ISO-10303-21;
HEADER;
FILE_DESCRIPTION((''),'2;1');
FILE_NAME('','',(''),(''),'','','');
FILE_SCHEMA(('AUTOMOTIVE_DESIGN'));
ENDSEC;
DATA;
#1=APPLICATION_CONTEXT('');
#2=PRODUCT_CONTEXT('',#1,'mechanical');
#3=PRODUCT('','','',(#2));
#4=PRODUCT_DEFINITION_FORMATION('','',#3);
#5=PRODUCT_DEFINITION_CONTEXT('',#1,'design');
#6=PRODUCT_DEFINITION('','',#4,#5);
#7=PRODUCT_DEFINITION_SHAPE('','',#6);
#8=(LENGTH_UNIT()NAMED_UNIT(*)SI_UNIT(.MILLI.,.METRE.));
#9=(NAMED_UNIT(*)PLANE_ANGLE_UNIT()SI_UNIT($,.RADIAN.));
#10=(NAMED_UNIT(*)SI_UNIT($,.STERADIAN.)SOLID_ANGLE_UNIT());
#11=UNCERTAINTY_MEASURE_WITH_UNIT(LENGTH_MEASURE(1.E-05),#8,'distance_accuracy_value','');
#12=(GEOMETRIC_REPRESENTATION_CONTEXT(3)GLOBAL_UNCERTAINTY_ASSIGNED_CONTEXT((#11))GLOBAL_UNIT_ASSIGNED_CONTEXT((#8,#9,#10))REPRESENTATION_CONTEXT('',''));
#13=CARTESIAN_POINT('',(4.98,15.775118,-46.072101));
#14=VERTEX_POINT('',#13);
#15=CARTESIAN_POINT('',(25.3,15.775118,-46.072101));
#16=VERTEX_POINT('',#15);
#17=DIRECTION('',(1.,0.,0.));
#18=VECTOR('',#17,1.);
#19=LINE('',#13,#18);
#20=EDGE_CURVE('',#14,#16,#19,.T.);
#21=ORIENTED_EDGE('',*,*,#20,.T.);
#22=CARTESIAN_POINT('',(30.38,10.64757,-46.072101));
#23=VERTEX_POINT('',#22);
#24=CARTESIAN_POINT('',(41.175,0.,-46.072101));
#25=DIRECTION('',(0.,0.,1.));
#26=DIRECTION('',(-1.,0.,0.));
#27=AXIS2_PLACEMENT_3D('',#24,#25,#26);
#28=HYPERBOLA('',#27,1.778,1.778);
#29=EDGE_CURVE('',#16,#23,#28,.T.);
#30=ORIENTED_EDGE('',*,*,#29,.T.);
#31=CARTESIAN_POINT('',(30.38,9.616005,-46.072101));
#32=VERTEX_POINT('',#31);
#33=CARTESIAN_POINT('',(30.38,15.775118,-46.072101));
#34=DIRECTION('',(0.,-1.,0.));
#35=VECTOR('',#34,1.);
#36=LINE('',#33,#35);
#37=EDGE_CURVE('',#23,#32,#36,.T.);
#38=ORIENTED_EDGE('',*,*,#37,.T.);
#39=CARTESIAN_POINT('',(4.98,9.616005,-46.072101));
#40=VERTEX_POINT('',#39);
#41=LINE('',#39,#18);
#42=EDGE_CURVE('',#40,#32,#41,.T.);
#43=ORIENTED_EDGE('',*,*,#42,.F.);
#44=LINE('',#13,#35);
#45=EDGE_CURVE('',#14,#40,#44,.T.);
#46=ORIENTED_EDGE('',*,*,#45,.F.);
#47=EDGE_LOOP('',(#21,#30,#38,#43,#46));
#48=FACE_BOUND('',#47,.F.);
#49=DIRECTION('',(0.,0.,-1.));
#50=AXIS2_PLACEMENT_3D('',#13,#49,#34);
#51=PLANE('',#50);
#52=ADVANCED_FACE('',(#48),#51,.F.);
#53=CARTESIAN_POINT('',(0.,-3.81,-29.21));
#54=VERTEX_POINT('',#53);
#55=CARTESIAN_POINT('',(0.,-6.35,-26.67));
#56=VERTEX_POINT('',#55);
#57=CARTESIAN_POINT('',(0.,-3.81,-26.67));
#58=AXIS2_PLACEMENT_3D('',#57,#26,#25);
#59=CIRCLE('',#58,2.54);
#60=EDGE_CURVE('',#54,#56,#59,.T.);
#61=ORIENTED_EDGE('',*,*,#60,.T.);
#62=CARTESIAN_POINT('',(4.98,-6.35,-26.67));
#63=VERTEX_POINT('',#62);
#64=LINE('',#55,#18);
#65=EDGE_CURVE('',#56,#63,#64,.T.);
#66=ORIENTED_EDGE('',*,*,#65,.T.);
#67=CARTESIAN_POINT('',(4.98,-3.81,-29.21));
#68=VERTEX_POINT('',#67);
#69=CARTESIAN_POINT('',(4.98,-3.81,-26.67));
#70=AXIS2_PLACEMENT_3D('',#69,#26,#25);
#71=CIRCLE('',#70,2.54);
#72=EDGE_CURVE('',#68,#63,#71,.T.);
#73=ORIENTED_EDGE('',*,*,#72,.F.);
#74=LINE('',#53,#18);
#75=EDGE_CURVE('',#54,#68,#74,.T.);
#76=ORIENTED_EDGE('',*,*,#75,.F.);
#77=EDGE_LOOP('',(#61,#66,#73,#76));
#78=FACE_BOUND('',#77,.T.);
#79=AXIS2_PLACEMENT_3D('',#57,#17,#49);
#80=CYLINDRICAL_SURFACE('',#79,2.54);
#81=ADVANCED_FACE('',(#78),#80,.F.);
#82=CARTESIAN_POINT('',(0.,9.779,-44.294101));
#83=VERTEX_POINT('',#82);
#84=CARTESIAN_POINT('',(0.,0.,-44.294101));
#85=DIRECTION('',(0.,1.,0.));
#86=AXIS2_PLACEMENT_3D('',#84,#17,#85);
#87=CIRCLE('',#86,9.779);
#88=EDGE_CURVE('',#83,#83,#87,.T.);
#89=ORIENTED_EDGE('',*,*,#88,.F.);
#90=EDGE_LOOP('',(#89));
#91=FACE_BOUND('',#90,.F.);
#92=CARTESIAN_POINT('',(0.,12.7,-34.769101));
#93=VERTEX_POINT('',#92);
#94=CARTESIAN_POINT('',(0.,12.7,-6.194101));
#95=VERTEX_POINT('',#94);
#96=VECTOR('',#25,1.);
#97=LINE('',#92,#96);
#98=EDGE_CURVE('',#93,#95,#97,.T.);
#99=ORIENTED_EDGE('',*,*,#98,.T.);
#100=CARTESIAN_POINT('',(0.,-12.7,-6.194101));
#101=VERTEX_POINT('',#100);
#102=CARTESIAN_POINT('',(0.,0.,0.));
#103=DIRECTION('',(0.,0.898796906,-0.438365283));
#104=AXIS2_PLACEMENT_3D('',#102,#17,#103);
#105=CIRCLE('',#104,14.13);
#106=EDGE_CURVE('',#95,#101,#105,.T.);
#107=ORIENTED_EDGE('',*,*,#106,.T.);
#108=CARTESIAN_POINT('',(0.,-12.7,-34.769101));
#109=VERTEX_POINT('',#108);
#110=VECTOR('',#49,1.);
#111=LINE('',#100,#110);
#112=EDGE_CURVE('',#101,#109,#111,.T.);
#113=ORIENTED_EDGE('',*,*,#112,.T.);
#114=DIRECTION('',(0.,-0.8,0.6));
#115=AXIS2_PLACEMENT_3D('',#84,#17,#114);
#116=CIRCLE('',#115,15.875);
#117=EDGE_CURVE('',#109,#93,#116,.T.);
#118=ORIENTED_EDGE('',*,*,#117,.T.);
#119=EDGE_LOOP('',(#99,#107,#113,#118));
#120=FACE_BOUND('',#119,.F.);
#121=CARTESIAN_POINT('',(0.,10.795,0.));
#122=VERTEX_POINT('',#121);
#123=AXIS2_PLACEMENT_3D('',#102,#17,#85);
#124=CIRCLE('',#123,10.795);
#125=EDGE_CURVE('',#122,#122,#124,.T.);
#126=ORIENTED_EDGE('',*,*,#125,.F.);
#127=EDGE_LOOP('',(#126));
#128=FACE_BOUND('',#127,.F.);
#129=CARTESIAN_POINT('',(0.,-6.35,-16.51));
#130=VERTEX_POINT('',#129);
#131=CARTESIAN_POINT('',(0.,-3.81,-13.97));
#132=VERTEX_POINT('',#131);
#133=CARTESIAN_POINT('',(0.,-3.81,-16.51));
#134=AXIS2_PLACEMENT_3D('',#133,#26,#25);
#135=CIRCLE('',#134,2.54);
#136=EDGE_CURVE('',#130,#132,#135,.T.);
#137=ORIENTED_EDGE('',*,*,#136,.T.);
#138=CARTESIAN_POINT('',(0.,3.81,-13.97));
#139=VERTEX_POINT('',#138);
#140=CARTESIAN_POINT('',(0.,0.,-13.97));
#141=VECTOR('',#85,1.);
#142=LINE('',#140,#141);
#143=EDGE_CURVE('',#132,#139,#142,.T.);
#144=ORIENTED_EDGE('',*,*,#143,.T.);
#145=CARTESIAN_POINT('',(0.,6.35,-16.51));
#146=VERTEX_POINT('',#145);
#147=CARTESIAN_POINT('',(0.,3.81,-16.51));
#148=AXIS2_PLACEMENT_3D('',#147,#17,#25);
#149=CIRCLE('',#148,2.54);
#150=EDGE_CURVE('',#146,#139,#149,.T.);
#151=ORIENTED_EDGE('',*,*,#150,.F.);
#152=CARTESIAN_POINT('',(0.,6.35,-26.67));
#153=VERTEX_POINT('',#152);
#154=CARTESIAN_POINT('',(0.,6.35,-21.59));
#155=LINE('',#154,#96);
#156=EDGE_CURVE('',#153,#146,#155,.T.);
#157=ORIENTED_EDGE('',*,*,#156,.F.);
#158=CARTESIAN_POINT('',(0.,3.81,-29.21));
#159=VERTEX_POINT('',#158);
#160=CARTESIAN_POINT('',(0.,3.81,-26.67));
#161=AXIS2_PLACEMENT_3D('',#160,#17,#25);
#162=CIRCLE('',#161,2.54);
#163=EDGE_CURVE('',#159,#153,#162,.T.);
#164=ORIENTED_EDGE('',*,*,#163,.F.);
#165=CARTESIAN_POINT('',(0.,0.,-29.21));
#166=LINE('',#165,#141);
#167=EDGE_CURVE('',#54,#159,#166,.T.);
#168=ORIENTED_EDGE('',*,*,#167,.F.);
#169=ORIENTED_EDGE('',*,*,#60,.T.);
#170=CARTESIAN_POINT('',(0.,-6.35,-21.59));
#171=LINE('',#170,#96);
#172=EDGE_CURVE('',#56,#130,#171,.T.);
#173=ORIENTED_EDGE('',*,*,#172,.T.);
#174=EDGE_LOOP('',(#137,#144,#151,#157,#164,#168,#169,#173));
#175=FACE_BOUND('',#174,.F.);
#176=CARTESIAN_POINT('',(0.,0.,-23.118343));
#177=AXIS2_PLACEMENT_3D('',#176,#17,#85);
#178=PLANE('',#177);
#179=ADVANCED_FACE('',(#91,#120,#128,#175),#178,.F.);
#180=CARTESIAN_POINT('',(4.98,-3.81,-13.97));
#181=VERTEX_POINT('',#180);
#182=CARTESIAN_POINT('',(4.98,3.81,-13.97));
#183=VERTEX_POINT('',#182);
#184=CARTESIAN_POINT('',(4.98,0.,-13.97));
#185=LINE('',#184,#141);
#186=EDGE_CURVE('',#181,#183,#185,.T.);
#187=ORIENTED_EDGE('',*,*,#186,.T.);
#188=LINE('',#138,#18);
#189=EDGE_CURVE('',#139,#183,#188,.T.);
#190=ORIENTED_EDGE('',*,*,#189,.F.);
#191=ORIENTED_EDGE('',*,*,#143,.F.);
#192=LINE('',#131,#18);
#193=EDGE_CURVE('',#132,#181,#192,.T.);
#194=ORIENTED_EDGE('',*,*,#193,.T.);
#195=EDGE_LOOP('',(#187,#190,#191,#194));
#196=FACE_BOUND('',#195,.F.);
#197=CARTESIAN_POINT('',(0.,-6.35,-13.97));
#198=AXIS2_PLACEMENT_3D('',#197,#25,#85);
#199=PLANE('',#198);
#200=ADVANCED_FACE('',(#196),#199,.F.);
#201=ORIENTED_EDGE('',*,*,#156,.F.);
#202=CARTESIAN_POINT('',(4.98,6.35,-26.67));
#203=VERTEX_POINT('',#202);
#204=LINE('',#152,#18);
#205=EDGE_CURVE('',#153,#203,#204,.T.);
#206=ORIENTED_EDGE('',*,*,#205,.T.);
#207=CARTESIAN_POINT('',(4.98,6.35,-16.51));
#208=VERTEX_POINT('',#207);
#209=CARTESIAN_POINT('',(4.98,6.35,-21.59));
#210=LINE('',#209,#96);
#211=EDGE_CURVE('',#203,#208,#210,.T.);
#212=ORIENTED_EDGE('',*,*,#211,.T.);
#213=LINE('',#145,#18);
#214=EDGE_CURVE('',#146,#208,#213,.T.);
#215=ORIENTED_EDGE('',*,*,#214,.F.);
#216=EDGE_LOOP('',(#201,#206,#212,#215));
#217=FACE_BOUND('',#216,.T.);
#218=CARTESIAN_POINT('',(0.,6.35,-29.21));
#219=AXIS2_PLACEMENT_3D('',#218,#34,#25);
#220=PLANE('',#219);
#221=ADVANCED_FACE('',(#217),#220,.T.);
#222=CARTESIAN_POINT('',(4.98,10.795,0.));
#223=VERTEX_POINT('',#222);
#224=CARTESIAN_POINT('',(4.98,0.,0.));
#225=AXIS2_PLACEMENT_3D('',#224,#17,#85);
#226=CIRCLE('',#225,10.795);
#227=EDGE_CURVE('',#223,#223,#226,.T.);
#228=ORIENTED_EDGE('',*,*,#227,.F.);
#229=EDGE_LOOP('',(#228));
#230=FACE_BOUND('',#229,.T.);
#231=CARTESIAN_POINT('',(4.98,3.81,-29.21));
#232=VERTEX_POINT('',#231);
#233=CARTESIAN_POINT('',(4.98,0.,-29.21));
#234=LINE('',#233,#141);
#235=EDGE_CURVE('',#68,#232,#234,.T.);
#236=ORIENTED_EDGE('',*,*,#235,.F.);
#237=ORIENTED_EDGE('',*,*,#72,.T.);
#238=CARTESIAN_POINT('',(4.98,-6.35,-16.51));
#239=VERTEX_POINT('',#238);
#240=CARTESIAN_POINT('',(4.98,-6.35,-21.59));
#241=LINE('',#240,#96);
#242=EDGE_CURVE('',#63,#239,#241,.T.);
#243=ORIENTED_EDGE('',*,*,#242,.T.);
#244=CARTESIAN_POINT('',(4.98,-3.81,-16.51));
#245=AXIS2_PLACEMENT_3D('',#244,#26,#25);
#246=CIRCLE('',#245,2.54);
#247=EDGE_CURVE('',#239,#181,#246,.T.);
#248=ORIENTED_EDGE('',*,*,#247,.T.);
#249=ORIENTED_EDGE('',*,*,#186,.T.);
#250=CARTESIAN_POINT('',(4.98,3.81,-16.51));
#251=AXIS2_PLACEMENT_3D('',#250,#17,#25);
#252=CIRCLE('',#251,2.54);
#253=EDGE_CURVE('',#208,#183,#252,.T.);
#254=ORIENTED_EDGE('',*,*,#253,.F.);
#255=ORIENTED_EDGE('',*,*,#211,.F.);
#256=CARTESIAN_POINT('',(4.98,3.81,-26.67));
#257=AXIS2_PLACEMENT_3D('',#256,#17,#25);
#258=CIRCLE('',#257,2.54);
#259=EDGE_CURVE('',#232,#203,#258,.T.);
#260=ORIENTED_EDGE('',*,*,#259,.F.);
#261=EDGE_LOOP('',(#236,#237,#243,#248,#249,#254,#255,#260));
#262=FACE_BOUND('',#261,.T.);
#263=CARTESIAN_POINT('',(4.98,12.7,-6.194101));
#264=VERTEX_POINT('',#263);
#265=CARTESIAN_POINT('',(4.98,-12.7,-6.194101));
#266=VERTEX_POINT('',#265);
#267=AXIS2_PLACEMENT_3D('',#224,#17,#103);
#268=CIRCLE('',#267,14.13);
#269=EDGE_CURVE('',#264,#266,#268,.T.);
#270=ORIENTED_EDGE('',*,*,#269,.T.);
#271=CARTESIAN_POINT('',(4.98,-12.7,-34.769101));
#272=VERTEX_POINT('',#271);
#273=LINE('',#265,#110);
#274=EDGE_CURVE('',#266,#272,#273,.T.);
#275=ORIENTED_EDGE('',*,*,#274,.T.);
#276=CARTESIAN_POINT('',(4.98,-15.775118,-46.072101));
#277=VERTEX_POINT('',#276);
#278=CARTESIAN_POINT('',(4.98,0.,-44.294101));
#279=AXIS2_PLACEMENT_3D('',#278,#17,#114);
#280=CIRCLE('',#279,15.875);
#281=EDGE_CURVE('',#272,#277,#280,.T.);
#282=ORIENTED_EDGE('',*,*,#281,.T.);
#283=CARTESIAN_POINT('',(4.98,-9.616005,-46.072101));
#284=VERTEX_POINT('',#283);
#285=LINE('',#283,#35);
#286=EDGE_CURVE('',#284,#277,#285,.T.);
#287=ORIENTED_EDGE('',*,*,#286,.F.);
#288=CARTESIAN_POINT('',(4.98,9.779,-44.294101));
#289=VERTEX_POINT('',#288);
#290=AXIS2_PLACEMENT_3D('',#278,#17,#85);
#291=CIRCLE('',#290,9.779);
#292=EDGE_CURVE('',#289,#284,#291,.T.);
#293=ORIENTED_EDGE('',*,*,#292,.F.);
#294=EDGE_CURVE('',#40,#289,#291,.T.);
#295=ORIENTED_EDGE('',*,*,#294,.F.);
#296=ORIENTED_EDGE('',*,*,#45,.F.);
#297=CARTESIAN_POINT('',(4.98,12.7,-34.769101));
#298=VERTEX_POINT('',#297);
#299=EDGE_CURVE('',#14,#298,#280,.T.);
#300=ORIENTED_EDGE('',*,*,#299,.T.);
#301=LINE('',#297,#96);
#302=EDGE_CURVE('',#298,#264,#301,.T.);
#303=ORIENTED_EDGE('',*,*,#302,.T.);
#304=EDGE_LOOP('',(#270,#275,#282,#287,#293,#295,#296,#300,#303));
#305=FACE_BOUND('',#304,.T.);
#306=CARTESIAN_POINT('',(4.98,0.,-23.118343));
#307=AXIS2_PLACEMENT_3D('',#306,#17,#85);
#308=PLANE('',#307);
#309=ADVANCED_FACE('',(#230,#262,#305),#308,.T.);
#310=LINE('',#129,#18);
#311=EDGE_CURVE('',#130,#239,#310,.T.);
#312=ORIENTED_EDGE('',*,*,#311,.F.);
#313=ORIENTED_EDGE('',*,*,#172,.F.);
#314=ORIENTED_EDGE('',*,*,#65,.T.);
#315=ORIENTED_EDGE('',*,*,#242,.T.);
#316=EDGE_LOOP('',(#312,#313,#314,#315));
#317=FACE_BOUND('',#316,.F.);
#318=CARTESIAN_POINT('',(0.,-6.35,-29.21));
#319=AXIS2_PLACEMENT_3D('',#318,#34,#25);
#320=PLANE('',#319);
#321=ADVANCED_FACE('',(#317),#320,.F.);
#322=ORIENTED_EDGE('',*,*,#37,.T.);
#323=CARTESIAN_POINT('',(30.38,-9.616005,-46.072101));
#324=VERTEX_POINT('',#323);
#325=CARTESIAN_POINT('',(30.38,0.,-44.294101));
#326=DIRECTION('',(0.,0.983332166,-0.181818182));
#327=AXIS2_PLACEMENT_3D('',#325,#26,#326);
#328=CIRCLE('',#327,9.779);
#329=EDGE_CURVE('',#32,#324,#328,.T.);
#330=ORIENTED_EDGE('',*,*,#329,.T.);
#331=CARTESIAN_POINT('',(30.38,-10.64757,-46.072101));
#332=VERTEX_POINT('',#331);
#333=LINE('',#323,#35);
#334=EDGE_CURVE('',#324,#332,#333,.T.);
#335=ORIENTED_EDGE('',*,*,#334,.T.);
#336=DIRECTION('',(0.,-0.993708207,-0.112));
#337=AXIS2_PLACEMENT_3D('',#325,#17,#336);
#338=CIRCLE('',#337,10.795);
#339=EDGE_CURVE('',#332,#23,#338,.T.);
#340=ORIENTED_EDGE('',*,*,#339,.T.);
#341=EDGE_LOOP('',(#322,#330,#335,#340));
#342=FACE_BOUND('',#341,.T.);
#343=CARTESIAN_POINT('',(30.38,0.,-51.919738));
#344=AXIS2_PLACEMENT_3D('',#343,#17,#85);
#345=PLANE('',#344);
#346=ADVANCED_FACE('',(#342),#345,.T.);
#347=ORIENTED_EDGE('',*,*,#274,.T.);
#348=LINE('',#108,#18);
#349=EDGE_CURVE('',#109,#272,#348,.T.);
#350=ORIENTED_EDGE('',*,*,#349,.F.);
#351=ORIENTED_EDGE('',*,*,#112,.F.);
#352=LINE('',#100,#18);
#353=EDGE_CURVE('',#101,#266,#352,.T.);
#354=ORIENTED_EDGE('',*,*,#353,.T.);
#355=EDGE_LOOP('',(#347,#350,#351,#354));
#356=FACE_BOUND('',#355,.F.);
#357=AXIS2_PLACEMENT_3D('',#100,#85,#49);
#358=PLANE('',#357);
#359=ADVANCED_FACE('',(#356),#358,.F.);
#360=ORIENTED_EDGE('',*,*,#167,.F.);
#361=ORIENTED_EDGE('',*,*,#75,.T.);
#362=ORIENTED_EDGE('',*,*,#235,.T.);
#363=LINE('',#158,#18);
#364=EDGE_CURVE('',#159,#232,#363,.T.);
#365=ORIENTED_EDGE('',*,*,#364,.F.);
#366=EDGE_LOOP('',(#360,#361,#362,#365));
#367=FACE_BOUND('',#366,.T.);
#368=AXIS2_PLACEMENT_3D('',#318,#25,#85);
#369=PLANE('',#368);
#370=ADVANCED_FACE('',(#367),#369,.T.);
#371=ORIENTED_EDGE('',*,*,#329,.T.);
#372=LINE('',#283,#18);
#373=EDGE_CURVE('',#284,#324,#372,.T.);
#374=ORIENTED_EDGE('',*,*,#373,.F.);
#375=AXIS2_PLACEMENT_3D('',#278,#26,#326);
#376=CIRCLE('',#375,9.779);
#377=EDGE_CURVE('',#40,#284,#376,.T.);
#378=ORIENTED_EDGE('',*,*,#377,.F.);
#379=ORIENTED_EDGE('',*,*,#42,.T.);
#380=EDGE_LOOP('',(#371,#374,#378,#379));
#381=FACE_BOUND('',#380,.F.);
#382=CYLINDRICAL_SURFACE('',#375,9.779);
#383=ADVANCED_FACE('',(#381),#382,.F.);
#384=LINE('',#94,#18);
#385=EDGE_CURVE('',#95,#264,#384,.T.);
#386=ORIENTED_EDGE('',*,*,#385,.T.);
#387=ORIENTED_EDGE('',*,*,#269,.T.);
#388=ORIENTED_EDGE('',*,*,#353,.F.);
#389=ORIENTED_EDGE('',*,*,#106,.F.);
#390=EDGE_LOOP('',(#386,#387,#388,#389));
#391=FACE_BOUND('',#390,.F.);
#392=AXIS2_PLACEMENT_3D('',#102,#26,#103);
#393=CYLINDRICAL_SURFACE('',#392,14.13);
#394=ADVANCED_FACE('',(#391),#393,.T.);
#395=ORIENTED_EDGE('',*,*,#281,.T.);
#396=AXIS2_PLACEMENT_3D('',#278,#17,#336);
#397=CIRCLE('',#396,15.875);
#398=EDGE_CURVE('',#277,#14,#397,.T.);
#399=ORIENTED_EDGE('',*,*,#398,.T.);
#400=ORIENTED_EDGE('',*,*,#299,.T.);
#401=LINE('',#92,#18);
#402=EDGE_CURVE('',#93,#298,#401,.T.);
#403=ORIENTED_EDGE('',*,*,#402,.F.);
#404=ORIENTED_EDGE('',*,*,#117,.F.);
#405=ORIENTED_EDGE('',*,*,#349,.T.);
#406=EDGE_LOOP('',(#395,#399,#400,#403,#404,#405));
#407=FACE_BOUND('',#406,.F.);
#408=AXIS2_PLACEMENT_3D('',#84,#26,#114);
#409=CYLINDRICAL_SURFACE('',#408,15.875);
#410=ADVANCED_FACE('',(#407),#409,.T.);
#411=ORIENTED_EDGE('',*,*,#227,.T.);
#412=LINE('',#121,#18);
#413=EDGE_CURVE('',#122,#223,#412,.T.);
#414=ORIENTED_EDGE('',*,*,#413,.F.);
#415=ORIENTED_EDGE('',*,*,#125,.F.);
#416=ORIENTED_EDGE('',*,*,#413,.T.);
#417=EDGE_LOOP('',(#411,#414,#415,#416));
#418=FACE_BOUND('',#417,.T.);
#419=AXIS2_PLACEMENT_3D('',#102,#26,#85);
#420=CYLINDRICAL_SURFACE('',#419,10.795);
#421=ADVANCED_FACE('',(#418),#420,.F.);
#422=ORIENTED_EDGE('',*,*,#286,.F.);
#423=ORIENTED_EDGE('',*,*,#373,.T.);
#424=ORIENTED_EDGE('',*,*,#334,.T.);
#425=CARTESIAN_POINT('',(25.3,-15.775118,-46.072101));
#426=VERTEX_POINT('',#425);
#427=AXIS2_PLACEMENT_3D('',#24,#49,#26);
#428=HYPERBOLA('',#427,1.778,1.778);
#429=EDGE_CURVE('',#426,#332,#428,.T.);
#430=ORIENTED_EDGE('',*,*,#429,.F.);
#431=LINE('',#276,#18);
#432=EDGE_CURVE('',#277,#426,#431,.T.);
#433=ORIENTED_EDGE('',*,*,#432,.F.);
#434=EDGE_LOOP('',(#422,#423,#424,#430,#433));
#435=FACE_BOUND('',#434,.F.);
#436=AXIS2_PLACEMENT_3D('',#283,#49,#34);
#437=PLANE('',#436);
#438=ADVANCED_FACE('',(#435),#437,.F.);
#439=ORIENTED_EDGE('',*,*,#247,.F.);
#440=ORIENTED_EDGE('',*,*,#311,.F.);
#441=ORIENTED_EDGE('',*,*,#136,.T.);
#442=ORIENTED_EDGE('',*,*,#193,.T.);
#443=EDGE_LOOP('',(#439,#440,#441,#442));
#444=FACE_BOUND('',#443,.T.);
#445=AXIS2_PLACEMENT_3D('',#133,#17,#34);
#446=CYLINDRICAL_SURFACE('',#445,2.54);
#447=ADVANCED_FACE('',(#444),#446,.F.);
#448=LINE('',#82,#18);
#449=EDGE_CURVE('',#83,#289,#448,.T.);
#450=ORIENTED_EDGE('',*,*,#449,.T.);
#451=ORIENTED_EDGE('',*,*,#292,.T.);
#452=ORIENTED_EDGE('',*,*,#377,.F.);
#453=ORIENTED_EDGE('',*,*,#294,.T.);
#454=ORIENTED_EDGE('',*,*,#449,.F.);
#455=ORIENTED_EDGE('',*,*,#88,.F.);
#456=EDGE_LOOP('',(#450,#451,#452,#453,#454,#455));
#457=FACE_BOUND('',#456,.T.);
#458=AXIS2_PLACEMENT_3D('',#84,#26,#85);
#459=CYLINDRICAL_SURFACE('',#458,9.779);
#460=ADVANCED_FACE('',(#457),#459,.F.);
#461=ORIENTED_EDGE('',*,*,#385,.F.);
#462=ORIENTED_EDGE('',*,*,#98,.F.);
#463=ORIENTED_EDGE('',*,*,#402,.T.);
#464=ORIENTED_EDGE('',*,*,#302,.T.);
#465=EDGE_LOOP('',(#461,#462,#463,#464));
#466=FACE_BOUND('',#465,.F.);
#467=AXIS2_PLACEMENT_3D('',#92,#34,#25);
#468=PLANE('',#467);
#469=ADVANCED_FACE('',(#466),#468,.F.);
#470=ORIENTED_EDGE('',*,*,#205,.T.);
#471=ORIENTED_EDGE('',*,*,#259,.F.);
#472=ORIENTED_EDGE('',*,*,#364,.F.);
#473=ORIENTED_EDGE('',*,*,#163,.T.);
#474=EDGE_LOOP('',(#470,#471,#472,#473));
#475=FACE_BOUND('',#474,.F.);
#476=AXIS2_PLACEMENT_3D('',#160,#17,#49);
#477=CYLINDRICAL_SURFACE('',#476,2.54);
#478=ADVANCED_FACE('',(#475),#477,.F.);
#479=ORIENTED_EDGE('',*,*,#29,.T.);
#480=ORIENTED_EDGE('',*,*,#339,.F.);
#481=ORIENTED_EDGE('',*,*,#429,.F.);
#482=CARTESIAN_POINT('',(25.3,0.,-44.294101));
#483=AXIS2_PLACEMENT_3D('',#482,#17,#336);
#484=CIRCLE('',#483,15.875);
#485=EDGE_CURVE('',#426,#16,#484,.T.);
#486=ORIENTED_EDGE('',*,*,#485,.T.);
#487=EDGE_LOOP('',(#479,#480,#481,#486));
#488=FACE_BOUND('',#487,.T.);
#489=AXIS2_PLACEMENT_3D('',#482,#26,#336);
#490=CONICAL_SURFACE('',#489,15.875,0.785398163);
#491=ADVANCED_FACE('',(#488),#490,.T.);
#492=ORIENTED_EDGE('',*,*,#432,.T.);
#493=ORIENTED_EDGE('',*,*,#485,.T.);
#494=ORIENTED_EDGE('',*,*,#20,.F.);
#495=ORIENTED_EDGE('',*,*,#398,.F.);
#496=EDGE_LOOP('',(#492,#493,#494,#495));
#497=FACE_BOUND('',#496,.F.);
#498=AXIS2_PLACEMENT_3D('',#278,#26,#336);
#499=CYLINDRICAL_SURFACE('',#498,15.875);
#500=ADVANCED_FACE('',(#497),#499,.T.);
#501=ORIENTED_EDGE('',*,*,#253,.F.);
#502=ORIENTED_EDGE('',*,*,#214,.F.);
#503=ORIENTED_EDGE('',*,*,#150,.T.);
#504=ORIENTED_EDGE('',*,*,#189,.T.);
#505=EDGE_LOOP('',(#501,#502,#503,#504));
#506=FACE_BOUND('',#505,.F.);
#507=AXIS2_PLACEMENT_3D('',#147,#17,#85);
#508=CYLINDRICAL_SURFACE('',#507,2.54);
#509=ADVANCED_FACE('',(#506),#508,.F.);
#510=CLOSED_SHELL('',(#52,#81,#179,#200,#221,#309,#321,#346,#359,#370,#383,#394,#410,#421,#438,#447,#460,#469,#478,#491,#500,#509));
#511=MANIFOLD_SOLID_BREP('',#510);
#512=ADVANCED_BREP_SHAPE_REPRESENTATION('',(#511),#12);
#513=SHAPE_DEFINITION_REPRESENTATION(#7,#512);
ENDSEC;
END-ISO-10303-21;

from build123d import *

# Parameters (mm, degrees)
F0_R     = 9.779
F0_W     = 12.7
F0_H     = 15.24
F0_R_2   = 10.795
F1_DEPTH = 4.9800002
F3_DEPTH = 25.4
F4_SIZE  = 5.08
F5_R     = 2.54


# Not quite as in the source:
# - a feature names something its author has since deleted; it is built from what else it names


with BuildPart() as f1:
    # F0 (on Right) → F1 (new body)
    with BuildSketch(Plane.YZ):
        with BuildLine():
            Line((12.7, -34.7691013034), (12.7, -6.1941013034))
            ThreePointArc((12.7, -6.1941013034), (0, 14.12999968), (-12.7, -6.1941013034))
            Line((-12.7, -6.1941013034), (-12.7, -34.7691013034))
            ThreePointArc((-12.7, -34.7691013034), (0, -60.1691013034), (12.7, -34.7691013034))
        make_face()
        with Locations((0, -44.2941013034)):
            Circle(F0_R, mode=Mode.SUBTRACT)
        with Locations((0, -21.59)):
            Rectangle(F0_W, F0_H, mode=Mode.SUBTRACT)
        Circle(F0_R_2, mode=Mode.SUBTRACT)
    extrude(amount=F1_DEPTH)

    # F2 (on face) → F3 (join)
    with BuildSketch(Plane.YZ.offset(4.9800002)):
        with BuildLine():
            ThreePointArc((9.6160052517, -46.0721013034), (0, -54.0731013034), (-9.6160052517, -46.0721013034))
            Line((-9.6160052517, -46.0721013034), (-15.7751177809, -46.0721013034))
            ThreePointArc((-15.7751177809, -46.0721013034), (0, -60.1691013034), (15.7751177809, -46.0721013034))
            Line((15.7751177809, -46.0721013034), (9.6160052517, -46.0721013034))
        make_face()
    extrude(amount=F3_DEPTH)

    # F4
    f4_edges = [f1.edges().sort_by_distance(p)[0] for p in [
        (30.38, 0, -60.169101),
    ]]
    chamfer(f4_edges, length=F4_SIZE)

    # F5
    f5_edges = [f1.edges().sort_by_distance(p)[0] for p in [
        (2.49, 6.35, -13.97),
        (2.49, -6.35, -13.97),
        (2.49, 6.35, -29.21),
        (2.49, -6.35, -29.21),
    ]]
    fillet(f5_edges, radius=F5_R)


solid = f1.part
